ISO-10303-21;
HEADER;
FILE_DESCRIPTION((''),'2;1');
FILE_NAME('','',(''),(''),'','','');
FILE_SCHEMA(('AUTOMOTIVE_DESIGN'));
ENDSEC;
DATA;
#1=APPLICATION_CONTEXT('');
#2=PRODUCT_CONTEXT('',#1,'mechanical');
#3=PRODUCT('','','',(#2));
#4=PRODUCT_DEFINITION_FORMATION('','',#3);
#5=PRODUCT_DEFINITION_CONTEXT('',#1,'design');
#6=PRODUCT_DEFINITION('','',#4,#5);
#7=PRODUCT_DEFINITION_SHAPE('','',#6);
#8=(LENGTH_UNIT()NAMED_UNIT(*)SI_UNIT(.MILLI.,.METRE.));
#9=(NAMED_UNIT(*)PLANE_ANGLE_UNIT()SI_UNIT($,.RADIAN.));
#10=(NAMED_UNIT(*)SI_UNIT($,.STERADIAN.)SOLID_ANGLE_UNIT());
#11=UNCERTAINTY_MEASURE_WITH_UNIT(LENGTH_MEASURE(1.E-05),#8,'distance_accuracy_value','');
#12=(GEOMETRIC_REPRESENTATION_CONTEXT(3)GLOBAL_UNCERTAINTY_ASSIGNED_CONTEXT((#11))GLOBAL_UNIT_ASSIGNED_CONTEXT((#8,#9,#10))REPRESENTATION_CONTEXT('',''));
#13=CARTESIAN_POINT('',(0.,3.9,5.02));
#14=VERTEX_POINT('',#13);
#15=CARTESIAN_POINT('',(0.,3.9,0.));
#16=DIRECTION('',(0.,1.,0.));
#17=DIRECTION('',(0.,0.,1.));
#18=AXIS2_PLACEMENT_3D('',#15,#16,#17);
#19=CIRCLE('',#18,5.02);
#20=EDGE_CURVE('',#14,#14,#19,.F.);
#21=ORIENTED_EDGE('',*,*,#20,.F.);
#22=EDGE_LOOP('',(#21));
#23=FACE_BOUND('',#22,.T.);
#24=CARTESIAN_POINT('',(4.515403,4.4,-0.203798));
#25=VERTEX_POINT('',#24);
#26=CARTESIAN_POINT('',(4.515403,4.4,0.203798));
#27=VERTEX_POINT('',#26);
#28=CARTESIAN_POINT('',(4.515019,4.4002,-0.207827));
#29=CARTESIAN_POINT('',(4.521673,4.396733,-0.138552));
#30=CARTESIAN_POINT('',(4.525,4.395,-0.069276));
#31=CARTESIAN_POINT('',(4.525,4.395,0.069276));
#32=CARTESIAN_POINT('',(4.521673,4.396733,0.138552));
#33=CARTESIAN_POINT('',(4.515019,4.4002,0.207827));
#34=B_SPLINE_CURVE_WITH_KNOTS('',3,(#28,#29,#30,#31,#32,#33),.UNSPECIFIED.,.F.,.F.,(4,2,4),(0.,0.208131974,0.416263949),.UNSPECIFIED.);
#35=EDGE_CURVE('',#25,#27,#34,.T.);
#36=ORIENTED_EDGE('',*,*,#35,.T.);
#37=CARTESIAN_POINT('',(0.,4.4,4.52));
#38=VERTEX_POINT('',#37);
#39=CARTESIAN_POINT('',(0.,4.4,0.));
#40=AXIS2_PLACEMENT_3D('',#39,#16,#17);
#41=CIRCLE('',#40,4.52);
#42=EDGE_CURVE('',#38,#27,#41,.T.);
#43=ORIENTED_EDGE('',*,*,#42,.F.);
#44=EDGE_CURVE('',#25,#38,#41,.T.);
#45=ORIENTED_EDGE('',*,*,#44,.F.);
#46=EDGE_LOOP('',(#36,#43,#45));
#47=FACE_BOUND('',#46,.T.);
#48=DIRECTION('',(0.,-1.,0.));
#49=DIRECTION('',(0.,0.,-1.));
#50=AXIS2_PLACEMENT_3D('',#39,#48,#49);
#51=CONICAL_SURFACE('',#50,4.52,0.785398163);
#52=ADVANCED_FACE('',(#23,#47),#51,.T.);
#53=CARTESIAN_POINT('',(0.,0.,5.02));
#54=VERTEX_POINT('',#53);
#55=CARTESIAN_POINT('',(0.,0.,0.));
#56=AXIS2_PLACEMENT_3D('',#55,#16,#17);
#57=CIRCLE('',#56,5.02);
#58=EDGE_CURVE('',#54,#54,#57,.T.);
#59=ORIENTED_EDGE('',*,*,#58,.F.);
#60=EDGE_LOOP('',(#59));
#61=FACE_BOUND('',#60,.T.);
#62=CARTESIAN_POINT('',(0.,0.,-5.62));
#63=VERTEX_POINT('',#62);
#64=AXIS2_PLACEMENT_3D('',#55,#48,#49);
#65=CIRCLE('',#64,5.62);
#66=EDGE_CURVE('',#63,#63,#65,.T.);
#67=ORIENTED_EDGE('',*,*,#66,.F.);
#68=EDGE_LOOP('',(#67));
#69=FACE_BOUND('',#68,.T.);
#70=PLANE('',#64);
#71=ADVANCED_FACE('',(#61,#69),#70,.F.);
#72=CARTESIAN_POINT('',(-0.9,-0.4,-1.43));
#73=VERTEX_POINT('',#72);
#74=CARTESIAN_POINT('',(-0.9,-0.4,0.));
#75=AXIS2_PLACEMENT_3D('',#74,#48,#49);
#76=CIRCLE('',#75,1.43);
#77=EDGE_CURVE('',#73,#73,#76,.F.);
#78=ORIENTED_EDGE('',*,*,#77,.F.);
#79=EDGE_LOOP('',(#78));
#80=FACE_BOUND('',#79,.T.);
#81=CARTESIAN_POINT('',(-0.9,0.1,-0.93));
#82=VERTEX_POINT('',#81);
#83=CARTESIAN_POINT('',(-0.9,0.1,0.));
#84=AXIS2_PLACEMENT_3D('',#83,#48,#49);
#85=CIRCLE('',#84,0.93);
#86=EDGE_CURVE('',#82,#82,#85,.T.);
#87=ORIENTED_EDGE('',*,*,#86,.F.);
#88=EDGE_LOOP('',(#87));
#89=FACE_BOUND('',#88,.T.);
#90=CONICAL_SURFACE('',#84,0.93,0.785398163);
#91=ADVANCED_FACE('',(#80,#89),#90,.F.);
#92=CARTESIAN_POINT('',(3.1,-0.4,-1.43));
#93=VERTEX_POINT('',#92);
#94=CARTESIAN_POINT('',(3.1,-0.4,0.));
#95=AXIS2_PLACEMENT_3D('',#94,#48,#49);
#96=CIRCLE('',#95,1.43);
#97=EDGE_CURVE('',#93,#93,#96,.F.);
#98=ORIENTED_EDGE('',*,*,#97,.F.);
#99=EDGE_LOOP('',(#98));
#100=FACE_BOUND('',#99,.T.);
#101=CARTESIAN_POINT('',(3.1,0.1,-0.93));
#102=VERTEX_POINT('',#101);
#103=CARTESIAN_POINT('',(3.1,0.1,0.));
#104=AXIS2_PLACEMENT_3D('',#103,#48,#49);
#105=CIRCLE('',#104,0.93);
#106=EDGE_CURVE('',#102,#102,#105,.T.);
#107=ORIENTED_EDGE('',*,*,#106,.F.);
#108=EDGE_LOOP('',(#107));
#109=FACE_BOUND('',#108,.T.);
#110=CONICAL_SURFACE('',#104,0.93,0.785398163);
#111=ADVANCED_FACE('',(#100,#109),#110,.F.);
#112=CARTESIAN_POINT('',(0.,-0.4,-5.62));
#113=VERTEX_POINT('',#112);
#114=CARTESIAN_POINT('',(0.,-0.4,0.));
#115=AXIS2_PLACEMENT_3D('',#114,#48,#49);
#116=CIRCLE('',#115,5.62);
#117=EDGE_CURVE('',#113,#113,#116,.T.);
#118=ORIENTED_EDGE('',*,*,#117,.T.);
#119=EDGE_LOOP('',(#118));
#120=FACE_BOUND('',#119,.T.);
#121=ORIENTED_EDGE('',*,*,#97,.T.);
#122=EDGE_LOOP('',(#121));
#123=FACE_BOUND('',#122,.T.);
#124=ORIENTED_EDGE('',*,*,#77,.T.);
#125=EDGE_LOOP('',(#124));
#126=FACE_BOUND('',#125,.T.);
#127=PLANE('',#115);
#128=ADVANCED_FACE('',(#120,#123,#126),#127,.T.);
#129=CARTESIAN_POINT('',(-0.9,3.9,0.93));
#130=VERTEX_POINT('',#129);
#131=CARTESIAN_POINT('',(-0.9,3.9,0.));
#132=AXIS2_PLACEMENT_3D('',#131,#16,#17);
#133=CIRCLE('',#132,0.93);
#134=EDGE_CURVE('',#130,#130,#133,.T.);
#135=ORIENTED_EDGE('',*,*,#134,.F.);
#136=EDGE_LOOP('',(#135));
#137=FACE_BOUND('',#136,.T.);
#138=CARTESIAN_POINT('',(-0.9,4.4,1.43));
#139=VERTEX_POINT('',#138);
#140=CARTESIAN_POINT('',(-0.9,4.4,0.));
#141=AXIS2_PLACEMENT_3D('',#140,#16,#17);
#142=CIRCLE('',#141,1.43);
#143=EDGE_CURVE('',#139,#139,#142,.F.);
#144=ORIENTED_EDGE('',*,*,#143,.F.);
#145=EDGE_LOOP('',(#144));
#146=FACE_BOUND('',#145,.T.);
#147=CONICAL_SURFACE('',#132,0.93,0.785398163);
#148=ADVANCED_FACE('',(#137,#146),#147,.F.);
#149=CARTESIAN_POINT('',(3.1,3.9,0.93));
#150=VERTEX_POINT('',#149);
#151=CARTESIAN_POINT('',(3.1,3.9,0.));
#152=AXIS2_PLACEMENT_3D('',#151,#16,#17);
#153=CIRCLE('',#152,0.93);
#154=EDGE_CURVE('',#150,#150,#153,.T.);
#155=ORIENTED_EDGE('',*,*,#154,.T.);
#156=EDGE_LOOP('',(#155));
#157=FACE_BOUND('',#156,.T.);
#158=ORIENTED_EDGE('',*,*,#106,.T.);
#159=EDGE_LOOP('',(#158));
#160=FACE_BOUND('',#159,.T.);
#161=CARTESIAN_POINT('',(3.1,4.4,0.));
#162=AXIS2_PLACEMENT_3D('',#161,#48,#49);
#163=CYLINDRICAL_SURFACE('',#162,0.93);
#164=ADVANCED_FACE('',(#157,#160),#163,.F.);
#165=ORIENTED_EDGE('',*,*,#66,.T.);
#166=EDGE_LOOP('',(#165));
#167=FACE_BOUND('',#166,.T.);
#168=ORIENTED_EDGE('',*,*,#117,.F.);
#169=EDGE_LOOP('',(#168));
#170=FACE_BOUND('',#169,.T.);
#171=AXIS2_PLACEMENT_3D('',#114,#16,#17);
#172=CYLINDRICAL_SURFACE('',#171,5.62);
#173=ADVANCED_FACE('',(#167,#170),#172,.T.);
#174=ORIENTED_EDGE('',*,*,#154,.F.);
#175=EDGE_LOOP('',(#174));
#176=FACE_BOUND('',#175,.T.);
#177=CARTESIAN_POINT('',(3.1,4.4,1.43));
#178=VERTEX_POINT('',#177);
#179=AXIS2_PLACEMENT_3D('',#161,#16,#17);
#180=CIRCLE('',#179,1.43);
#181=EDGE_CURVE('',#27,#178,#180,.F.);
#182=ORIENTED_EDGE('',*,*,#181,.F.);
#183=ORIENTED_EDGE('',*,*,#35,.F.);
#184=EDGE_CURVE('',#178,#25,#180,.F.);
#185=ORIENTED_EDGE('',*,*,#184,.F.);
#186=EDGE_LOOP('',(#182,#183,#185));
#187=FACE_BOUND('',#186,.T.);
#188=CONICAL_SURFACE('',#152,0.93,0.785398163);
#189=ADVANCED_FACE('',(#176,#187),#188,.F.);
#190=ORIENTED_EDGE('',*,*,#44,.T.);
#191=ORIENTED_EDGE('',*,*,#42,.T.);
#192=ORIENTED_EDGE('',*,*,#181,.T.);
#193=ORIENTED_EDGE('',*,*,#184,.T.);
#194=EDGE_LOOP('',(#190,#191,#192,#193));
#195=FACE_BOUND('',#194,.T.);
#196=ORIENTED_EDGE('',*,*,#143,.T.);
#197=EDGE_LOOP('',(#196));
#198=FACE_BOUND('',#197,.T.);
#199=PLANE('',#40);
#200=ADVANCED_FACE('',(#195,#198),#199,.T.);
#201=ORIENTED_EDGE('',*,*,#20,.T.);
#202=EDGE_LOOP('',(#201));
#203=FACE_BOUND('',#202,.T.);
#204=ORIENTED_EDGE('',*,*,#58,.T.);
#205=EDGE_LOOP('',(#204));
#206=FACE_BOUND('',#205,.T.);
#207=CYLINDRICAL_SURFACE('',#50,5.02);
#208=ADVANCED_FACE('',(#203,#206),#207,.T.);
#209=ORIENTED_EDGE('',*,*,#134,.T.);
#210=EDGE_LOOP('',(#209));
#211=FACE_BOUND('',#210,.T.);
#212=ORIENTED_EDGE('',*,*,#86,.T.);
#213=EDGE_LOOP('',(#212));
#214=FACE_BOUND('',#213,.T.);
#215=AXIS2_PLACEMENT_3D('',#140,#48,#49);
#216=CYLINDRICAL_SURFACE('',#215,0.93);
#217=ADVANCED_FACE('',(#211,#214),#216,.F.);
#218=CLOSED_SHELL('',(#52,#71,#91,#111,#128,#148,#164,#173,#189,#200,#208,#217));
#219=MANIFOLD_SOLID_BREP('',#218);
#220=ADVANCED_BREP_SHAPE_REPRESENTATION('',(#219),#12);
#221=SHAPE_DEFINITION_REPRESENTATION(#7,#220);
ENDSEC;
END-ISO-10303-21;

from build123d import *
from build123d.topology import SkipClean

# Parameters (mm, degrees)
SKETCH_1_R      = 5.02
SKETCH_1_R_2    = 0.93
EXTRUDE_1_DEPTH = 4.4
EXTRUDE_START   = 0.4
SKETCH_3_R      = 5.62
SKETCH_3_R_2    = 0.93
EXTRUDE_2_DEPTH = 0.4
CHAMFER_1_SIZE  = 0.5


with BuildPart() as part:
    # 草图1 → 凸台-拉伸1 (new body)
    with BuildSketch(Plane(origin=(0, 0, 0), x_dir=(1, 0, 0), z_dir=(0, 1, 0))):
        with Locations(Location((0, 0, 0), (0, 0, 270))):
            Circle(SKETCH_1_R)
        with Locations(Location((3.1, 0, 0), (0, 0, 270))):
            Circle(SKETCH_1_R_2, mode=Mode.SUBTRACT)
        with Locations(Location((-0.9, 0, 0), (0, 0, 90))):
            Circle(SKETCH_1_R_2, mode=Mode.SUBTRACT)
    extrude(amount=EXTRUDE_1_DEPTH)

    # 草图3 → 凸台-拉伸2 (add)
    with SkipClean():  # the faces are left unmerged after this step: merging them gives an invalid solid
        with BuildSketch(Plane.XZ.offset(EXTRUDE_START)):
            with Locations(Location((0, 0, 0), (0, 0, 270))):
                Circle(SKETCH_3_R)
            with Locations(Location((3.1, 0, 0), (0, 0, 270))):
                Circle(SKETCH_3_R_2, mode=Mode.SUBTRACT)
            with Locations(Location((-0.9, 0, 0), (0, 0, 270))):
                Circle(SKETCH_3_R_2, mode=Mode.SUBTRACT)
        extrude(amount=-EXTRUDE_2_DEPTH)

    # 倒角1
    # the kernel refuses this chamfer: 0.5 mm, written as the material it takes off along each edge
    with BuildSketch(Plane(origin=(3.1, -0.4, 0), x_dir=(0, 0, -1), z_dir=(-1, 0, 0))) as chamfer_1_piece_1:
        Polygon((0.93 + CHAMFER_1_SIZE, 0), (0.93, -CHAMFER_1_SIZE), (0.93, 0), align=None)
    revolve(axis=Axis((3.1, -0.4, 0), (0, -1, 0)), mode=Mode.SUBTRACT)
    with BuildSketch(Plane(origin=(-0.9, -0.4, 0), x_dir=(0, 0, -1), z_dir=(-1, 0, 0))) as chamfer_1_piece_2:
        Polygon((0.93 + CHAMFER_1_SIZE, 0), (0.93, -CHAMFER_1_SIZE), (0.93, 0), align=None)
    revolve(axis=Axis((-0.9, -0.4, 0), (0, -1, 0)), mode=Mode.SUBTRACT)
    with BuildSketch(Plane(origin=(0, 4.4, 0), x_dir=(0, 0, 1), z_dir=(-1, 0, 0))) as chamfer_1_piece_3:
        Polygon((5.02, -CHAMFER_1_SIZE), (5.02 - CHAMFER_1_SIZE, 0), (5.02, 0), align=None)
    revolve(axis=Axis((0, 4.4, 0), (0, 1, 0)), mode=Mode.SUBTRACT)
    with BuildSketch(Plane(origin=(3.1, 4.4, 0), x_dir=(0, 0, 1), z_dir=(-1, 0, 0))) as chamfer_1_piece_4:
        Polygon((0.93 + CHAMFER_1_SIZE, 0), (0.93, -CHAMFER_1_SIZE), (0.93, 0), align=None)
    revolve(axis=Axis((3.1, 4.4, 0), (0, 1, 0)), mode=Mode.SUBTRACT)
    with BuildSketch(Plane(origin=(-0.9, 4.4, 0), x_dir=(0, 0, -1), z_dir=(1, 0, 0))) as chamfer_1_piece_5:
        Polygon((0.93 + CHAMFER_1_SIZE, 0), (0.93, -CHAMFER_1_SIZE), (0.93, 0), align=None)
    revolve(axis=Axis((-0.9, 4.4, 0), (0, 1, 0)), mode=Mode.SUBTRACT)


solid = part.part
